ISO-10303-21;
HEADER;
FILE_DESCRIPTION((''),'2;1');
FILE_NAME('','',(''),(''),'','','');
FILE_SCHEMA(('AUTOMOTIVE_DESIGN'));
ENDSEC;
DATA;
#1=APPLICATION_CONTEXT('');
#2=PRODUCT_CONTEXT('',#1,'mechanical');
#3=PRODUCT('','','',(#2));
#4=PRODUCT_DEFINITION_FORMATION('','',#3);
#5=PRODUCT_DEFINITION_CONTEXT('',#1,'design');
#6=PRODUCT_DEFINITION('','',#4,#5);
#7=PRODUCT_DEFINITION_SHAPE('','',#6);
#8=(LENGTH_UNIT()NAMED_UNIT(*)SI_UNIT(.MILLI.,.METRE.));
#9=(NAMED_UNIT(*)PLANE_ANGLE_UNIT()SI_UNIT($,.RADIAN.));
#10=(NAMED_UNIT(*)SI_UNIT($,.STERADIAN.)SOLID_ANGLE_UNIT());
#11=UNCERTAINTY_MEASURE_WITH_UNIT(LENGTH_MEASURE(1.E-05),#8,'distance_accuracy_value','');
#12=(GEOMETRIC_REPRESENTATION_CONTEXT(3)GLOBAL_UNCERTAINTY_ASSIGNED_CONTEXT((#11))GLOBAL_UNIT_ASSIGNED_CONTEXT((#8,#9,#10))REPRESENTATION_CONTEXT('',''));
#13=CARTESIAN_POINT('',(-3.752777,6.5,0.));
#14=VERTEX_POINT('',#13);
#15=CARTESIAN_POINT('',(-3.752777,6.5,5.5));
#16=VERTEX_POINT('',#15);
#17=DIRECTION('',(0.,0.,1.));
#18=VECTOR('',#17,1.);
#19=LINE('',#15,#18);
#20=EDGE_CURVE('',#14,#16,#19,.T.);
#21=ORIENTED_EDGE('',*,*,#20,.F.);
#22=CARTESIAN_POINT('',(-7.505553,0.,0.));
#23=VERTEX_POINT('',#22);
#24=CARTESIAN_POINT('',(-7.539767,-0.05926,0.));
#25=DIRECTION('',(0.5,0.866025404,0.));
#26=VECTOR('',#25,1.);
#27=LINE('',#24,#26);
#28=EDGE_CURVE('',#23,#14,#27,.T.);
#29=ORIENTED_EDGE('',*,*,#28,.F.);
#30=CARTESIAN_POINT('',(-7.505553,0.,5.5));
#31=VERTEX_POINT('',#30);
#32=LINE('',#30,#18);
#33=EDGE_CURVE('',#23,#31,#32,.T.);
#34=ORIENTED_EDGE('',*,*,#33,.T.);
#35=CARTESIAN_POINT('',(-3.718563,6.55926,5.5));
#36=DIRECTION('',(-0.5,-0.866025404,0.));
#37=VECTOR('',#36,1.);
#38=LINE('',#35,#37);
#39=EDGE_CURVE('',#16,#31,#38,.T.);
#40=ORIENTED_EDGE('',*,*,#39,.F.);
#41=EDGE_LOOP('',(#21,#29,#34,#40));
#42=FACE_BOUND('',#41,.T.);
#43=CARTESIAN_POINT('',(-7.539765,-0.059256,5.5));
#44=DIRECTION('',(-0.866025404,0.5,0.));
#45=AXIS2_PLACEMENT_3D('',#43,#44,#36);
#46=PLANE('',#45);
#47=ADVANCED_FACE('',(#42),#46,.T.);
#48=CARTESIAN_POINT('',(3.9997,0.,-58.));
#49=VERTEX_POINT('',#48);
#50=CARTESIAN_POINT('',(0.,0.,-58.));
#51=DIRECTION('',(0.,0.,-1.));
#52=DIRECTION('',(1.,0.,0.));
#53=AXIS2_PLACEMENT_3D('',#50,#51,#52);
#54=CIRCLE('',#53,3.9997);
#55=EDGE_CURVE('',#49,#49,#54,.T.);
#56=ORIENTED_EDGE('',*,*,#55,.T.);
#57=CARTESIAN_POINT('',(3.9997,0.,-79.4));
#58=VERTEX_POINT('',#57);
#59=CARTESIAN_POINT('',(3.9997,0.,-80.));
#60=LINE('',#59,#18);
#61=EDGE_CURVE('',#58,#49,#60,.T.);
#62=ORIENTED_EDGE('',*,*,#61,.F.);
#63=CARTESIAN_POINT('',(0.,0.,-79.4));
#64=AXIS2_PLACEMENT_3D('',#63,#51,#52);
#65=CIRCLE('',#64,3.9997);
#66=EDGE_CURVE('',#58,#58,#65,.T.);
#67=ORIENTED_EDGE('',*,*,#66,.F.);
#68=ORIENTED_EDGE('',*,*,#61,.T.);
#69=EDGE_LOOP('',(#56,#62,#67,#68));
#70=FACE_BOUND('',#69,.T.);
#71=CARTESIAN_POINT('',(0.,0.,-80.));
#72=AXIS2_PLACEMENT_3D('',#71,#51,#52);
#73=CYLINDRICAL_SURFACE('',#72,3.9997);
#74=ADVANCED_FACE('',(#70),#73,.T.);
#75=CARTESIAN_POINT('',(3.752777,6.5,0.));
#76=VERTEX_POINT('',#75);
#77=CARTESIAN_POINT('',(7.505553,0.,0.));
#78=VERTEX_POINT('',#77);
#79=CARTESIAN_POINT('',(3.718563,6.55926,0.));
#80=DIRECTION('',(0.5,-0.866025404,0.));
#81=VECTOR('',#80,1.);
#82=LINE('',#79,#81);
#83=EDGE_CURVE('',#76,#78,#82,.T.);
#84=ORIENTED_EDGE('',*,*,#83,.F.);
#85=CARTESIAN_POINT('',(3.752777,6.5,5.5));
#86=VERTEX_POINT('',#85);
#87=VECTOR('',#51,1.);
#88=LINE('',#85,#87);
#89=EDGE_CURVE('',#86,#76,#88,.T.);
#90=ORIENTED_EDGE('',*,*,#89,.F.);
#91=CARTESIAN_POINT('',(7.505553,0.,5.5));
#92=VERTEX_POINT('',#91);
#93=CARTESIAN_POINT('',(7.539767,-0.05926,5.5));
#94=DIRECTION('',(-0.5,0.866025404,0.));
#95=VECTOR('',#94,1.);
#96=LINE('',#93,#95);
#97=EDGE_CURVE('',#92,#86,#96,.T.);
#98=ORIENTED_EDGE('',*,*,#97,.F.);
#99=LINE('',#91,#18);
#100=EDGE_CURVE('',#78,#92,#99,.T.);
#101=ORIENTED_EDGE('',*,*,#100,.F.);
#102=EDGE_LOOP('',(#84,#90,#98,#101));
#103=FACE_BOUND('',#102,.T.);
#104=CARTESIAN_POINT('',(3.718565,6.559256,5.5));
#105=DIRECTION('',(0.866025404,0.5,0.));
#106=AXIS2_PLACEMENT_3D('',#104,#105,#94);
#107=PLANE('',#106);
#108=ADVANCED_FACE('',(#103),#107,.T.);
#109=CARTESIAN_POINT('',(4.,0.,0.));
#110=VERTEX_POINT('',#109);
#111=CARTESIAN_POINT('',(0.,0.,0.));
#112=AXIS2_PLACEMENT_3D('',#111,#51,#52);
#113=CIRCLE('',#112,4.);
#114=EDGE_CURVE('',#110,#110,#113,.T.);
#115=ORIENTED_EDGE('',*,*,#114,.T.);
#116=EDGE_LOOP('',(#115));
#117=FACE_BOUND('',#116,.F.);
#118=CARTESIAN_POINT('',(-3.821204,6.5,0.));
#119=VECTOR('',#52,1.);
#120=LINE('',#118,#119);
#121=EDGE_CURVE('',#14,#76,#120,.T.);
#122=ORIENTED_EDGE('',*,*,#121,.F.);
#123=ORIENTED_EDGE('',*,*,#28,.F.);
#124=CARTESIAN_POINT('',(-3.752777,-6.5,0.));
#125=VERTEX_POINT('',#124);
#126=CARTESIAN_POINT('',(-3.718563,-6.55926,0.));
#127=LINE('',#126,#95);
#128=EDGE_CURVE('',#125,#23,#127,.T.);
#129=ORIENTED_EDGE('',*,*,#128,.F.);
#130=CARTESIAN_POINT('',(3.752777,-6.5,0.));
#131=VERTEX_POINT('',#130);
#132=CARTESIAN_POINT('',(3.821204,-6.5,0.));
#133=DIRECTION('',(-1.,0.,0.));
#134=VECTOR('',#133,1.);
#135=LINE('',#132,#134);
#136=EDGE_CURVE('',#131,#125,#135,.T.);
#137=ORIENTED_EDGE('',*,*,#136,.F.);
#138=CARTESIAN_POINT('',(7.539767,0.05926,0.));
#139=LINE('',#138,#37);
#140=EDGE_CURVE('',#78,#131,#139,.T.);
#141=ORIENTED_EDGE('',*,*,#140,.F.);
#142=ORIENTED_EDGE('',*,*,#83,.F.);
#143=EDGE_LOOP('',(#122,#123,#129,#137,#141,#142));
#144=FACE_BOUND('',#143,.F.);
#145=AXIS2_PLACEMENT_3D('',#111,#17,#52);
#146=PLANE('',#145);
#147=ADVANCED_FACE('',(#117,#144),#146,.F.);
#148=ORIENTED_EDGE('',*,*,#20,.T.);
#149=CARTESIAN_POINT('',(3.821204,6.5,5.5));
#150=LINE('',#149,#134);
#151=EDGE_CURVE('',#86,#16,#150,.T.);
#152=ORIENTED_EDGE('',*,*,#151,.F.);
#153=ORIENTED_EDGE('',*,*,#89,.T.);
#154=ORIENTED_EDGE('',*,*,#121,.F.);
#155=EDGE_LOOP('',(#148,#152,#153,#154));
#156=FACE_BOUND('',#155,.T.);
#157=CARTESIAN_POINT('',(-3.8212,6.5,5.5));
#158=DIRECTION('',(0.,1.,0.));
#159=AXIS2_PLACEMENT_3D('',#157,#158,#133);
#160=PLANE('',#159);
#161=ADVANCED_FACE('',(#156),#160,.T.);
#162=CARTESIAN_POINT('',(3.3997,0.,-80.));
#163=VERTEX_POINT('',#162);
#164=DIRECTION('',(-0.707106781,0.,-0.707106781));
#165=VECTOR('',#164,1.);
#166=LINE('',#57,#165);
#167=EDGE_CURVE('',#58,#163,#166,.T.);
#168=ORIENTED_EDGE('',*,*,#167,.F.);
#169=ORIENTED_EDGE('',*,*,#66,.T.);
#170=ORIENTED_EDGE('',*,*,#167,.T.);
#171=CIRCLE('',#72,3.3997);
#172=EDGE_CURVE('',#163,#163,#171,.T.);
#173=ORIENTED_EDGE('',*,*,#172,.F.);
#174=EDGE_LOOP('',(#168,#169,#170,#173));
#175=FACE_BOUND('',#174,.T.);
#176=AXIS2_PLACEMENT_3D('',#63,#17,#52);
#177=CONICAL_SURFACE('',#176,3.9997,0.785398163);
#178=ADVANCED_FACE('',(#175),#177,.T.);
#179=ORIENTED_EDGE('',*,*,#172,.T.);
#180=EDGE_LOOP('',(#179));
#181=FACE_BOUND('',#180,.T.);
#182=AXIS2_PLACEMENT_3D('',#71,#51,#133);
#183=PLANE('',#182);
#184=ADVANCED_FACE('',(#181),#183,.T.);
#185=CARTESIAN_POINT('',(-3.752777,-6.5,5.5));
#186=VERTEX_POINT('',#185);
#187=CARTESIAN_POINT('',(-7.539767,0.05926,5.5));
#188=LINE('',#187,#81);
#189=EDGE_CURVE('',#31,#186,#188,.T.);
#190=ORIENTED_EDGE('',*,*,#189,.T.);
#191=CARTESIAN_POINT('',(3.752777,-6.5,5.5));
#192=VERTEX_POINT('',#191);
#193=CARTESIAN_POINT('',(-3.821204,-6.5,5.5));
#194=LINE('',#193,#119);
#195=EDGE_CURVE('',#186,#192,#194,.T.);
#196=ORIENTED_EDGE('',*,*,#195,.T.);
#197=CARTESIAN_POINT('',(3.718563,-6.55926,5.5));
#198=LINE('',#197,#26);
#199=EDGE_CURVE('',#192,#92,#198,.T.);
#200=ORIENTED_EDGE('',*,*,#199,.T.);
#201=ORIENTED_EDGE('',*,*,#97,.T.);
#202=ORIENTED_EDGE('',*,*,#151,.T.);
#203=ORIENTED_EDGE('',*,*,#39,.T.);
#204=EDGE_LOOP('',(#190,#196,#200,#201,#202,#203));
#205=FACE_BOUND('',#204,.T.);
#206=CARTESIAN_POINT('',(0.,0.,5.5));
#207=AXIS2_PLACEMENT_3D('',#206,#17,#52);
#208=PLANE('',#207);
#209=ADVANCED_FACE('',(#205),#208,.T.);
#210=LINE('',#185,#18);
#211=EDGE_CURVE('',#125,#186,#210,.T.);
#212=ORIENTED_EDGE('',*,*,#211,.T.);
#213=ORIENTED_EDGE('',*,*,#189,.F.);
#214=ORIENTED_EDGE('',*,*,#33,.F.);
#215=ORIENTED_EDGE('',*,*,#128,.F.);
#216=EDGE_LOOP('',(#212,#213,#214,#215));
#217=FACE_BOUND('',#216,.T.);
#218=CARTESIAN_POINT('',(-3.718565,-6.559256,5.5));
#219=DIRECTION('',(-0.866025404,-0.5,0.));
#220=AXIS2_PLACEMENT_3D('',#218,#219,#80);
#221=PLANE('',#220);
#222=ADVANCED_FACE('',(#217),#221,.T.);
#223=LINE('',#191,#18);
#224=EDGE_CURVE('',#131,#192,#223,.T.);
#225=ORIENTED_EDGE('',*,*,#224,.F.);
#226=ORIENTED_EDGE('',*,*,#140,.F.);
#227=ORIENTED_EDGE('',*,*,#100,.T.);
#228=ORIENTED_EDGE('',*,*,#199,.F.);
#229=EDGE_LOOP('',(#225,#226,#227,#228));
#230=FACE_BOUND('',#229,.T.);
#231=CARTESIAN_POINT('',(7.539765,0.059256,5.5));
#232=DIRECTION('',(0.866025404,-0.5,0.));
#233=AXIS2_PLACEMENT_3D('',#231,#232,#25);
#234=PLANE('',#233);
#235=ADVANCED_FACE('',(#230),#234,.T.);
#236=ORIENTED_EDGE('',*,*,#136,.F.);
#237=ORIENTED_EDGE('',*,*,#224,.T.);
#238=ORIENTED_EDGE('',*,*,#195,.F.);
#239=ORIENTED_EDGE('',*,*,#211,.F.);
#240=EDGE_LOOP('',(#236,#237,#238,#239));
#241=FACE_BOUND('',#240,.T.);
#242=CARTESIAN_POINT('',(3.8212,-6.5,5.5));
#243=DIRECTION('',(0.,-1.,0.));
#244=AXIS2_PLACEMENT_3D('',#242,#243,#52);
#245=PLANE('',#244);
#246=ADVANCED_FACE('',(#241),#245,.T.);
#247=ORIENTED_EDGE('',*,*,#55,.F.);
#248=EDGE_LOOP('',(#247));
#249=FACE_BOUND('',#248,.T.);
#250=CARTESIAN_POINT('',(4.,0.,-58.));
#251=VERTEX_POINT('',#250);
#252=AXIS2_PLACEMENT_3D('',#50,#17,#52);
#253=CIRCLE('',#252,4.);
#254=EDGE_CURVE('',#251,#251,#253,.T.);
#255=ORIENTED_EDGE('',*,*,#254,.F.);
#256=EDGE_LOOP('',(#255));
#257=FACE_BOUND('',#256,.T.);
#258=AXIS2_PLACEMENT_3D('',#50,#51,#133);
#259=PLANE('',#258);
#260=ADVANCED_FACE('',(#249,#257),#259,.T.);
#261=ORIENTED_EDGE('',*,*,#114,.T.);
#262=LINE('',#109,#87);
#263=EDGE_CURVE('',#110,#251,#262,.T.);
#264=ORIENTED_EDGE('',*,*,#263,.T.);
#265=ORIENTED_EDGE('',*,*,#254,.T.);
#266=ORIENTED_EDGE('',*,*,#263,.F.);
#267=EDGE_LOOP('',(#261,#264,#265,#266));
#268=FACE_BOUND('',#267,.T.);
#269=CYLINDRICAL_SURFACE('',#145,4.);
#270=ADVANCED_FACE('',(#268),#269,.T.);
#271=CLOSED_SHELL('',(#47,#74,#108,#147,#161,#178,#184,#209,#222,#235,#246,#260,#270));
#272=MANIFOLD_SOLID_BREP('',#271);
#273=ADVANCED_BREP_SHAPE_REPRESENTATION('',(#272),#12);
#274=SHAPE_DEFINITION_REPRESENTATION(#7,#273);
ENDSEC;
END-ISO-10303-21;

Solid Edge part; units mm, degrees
sketch "Sketch1" plane through (0, 0, 0) normal (0, 0, 1) x (1, 0, 0)
  circle A0 centre (0, 0) radius 7.54
  dimension "D1" = 15.08
extrude "Protrusion1" add sketch "Sketch1" along normal blind 5.5
sketch "Sketch2" plane through (0, 0, 0) normal (0, 0, -1) x (1, 0, 0)
  circle A0 centre (0, 0) radius 4
extrude "Protrusion2" add sketch "Sketch2" along normal blind 80
sketch "Sketch3" plane through (0, 0, -80) normal (0, 0, -1) x (1, 0, 0)
  circle A0 centre (0, 0) radius 3.9997
extrude "Cutout1" cut sketch "Sketch3" against normal blind 22 flip side to cut
chamfer "Chamfer_1" distance 0.6 angle 45 1 edges at (-3.9997, 0, -80)
sketch "Sketch4" plane through (0, 0, 5.5) normal (0, 0, 1) x (1, 0, 0)
  line L0 (-3.8212, 6.5) -> (3.8212, 6.5)
  dimension "D1" = 13
extrude "Cutout2" cut sketch "Sketch4" against normal up to next material side at (0, 6.55, 5.5)
pattern_circular "Pattern1" count 6 over 360 about axis through (0, 0, 5.5) along (0, 0, 1) of "Cutout2"
properties part number "24104327"
